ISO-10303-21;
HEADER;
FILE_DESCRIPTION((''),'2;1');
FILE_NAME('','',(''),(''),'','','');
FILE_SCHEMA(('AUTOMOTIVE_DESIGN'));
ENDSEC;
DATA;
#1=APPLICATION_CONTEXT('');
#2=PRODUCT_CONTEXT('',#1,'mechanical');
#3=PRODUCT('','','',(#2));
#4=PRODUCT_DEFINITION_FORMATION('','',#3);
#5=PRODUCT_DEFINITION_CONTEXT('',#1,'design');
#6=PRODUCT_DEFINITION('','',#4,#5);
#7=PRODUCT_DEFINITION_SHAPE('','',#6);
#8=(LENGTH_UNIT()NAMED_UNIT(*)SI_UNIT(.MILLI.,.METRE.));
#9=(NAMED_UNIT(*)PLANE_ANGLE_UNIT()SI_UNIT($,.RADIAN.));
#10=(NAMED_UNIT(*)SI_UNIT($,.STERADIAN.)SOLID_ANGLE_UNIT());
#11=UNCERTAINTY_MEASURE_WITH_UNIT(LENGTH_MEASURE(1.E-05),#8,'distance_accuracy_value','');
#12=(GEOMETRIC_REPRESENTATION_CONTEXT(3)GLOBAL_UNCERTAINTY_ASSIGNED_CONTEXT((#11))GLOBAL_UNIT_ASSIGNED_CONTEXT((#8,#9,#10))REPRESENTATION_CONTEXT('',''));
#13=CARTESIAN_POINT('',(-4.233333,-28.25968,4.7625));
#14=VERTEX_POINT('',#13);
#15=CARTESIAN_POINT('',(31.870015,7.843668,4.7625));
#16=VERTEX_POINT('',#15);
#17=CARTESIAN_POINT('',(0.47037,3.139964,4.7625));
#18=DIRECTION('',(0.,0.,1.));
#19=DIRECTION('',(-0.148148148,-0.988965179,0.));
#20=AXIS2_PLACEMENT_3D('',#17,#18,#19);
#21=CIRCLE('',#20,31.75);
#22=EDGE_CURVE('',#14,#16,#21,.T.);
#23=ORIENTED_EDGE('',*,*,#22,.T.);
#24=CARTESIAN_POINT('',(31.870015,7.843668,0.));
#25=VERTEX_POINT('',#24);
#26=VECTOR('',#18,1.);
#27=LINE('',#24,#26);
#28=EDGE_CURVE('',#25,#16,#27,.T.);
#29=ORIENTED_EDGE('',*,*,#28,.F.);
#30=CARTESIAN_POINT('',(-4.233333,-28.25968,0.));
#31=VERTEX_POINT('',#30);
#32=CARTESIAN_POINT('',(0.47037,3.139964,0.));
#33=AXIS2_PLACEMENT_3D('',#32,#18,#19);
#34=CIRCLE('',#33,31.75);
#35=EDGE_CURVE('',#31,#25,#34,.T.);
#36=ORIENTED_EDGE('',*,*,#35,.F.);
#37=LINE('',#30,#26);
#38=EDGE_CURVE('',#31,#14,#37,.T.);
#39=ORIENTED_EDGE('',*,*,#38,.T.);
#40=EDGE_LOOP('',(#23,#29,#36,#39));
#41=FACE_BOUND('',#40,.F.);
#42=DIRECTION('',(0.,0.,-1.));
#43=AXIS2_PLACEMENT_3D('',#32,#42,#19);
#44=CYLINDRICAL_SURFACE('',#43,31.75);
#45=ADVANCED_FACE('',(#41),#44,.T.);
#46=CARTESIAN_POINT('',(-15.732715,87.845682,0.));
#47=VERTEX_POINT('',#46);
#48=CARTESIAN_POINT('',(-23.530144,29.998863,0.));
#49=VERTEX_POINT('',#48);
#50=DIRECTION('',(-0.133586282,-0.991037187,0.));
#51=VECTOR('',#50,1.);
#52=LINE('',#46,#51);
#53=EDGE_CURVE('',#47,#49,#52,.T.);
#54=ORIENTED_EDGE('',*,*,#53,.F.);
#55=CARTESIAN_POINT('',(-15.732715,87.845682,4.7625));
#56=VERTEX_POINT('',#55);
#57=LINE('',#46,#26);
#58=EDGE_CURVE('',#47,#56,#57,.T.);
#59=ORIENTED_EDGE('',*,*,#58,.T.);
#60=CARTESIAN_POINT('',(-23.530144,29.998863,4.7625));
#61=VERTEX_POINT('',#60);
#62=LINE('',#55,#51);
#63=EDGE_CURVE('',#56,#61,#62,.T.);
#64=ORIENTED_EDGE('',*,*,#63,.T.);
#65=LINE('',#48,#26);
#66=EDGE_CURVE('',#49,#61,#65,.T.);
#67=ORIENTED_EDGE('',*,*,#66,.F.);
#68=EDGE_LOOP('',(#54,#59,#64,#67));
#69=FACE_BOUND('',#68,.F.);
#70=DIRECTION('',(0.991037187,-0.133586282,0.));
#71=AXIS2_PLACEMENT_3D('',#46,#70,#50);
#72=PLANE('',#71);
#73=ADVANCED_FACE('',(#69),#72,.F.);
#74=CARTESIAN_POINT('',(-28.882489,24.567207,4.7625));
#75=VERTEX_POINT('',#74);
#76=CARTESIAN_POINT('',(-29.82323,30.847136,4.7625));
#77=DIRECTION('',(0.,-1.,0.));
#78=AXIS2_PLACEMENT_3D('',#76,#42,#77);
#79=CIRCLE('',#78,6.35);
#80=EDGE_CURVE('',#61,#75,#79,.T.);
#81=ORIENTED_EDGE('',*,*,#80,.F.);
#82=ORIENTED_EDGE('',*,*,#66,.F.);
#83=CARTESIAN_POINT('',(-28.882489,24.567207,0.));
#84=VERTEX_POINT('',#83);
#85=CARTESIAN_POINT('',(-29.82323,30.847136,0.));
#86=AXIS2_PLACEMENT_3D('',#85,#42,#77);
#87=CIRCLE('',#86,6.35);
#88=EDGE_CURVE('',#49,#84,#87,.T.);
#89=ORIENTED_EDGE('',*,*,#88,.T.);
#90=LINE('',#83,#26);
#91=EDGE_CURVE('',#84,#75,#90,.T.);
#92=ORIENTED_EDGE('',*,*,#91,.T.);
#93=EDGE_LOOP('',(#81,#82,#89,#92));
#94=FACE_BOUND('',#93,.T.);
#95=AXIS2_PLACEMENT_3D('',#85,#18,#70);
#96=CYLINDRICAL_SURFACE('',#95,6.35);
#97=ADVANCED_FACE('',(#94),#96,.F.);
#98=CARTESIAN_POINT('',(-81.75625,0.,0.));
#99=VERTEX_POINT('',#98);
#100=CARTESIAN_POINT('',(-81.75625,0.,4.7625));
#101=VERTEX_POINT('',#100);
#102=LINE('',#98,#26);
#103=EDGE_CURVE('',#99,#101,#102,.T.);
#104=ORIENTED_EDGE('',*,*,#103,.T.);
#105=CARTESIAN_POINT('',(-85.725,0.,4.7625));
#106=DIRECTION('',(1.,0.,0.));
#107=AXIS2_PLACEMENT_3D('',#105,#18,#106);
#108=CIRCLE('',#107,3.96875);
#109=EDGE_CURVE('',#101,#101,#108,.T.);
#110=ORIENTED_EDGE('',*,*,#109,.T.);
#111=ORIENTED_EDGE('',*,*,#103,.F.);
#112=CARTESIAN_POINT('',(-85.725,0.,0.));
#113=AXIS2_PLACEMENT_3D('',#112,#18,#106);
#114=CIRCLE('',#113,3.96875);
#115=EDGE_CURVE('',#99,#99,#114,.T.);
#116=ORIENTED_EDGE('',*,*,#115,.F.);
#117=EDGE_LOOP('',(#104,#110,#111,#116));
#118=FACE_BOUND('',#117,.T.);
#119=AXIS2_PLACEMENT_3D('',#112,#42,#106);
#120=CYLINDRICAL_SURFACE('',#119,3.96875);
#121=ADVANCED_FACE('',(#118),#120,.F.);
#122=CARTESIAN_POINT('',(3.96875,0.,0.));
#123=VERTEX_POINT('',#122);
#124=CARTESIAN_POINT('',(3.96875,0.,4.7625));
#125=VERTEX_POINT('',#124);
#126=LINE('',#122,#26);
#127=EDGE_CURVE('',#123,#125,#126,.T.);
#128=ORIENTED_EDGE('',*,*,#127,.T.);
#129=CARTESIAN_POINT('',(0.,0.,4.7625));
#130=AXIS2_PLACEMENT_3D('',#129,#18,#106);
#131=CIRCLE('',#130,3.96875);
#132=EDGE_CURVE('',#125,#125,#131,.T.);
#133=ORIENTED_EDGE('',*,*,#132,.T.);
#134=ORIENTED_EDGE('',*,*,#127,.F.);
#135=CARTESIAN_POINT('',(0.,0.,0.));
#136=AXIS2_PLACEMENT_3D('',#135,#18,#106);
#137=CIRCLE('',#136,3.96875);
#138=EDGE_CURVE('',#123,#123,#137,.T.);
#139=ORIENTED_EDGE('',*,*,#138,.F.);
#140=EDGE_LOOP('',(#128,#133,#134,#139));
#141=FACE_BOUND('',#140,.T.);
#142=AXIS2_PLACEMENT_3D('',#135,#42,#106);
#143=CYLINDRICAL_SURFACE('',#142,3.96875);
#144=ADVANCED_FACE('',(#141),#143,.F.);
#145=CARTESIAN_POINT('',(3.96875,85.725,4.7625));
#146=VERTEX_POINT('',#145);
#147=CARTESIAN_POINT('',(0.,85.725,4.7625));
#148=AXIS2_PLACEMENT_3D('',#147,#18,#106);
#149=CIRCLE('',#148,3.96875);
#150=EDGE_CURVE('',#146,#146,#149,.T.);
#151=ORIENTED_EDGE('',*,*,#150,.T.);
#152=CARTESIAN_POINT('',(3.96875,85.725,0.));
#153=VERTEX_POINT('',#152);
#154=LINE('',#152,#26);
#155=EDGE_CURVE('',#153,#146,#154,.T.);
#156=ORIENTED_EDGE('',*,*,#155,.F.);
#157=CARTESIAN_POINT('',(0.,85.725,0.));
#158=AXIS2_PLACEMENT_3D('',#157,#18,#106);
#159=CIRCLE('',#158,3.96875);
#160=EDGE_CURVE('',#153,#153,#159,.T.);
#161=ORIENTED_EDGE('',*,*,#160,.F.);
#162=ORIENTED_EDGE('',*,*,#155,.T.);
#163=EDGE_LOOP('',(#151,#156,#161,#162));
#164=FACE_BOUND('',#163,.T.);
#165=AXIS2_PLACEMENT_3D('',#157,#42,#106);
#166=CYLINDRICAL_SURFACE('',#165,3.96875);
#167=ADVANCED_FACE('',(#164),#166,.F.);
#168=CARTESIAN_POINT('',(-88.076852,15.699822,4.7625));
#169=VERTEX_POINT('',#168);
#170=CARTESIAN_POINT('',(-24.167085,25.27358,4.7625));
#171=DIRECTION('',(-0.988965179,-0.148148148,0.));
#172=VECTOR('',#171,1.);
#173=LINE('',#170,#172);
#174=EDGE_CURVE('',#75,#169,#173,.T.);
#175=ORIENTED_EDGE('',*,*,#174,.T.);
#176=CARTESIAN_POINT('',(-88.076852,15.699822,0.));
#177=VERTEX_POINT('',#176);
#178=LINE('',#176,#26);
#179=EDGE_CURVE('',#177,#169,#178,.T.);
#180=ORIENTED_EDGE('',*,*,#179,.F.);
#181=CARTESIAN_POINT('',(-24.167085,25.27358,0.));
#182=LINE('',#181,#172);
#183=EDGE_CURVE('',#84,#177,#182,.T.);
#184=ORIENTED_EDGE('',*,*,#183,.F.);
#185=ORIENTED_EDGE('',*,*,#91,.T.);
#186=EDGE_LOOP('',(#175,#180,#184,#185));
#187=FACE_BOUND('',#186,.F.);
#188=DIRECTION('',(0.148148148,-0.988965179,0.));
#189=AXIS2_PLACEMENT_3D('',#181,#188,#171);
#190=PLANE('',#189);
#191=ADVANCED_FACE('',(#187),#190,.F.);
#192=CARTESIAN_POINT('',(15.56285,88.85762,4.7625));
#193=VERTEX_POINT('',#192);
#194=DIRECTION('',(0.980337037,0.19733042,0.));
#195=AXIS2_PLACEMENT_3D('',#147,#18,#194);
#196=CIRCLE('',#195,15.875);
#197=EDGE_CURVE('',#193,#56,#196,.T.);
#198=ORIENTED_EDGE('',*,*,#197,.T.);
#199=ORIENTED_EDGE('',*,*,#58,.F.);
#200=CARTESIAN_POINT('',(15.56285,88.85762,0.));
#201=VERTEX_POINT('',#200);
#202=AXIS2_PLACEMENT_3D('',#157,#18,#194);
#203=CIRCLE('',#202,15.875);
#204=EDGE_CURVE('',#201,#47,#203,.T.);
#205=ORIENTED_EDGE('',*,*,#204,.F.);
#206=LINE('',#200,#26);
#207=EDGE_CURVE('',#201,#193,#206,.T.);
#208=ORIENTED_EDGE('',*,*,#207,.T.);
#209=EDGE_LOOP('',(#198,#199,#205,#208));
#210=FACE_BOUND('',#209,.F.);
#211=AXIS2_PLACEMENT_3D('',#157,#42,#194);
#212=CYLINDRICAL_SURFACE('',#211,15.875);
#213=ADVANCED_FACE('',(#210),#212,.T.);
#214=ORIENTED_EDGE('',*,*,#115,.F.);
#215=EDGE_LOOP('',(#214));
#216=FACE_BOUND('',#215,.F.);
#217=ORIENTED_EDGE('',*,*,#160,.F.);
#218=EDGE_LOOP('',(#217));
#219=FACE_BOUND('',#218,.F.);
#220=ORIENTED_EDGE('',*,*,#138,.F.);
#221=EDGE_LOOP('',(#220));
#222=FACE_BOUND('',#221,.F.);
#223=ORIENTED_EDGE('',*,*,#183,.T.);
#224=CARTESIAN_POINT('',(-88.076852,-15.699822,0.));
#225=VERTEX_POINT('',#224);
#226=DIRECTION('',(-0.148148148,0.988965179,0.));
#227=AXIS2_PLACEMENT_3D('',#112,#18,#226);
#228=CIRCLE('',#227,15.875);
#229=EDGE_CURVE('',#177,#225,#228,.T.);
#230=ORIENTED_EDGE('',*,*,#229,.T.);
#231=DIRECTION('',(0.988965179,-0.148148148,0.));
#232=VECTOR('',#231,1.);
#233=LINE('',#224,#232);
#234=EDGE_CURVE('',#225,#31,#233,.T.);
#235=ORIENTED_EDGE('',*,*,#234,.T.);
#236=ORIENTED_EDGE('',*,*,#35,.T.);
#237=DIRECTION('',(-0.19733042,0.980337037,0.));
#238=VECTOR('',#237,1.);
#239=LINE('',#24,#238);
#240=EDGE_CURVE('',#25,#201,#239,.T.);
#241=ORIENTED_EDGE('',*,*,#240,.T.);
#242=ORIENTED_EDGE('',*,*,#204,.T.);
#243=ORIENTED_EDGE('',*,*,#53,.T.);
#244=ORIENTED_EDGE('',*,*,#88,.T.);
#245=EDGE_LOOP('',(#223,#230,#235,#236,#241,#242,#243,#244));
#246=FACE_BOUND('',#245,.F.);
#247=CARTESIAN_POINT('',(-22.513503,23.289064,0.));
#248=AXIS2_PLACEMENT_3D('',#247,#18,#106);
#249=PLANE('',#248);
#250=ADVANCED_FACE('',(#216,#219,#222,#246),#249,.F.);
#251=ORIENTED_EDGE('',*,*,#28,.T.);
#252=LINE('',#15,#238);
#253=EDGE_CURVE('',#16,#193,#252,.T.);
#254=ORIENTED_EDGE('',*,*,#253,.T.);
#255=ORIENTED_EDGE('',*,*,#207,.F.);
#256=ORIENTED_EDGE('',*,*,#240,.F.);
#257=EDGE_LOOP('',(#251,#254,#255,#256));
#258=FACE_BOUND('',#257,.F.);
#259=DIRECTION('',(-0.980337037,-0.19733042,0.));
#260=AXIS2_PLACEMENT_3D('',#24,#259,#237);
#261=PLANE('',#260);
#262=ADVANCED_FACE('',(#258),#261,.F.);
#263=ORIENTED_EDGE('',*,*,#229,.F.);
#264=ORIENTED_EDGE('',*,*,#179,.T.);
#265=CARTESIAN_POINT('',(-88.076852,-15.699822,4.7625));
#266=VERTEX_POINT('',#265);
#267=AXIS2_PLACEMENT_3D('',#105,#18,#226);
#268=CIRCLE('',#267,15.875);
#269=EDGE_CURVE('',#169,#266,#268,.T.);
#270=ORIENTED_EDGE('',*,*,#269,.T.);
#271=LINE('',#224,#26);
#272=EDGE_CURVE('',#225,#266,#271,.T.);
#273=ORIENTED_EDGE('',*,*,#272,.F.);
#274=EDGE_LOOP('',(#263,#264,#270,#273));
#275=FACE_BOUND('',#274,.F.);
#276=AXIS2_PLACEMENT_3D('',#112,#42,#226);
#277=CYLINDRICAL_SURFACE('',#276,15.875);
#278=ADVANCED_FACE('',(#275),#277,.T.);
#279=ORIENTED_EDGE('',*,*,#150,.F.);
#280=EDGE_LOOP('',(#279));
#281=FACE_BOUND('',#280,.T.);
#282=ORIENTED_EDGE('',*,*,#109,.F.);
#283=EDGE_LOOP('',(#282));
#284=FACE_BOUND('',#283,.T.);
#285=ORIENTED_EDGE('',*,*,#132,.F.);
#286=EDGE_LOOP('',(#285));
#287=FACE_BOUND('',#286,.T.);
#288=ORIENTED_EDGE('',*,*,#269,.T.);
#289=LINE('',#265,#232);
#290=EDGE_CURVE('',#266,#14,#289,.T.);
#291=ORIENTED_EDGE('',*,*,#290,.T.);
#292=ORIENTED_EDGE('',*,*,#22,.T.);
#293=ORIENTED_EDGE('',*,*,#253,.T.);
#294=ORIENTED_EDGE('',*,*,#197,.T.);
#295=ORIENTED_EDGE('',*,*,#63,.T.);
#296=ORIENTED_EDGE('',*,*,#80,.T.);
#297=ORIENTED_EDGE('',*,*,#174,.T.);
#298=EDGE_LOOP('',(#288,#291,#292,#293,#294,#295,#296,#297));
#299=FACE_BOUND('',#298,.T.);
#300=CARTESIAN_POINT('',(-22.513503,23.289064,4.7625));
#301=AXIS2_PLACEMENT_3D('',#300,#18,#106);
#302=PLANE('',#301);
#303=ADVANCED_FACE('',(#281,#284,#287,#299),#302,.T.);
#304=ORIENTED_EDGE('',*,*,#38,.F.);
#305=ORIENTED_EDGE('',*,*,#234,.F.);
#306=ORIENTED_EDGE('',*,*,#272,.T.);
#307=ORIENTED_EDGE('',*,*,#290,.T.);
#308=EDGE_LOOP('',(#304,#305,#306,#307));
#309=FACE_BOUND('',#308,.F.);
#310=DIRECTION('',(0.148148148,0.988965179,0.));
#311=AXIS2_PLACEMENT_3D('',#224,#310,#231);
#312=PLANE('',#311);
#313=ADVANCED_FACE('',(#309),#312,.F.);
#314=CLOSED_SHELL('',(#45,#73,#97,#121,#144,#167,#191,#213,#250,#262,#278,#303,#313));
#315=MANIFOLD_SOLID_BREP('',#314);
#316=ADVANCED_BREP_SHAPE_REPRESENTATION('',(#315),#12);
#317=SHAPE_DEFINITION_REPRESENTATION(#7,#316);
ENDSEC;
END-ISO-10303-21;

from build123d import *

# Parameters (mm, degrees)
F0_R     = 3.96875
F1_DEPTH = 4.7625
F2_R     = 6.35


# Not quite as in the source:
# - a feature names something its author has since deleted; it is built from what else it names


with BuildPart() as f1:
    # F0 (on Top) → F1 (new body)
    with BuildSketch(Plane.XY):
        with BuildLine():
            Line((31.8700148185, 7.8436681485), (15.5628504577, 88.8576204098))
            ThreePointArc((15.5628504577, 88.8576204098), (-0.5130479886, 101.5917074959), (-15.732715337, 87.8456822313))
            Line((-15.732715337, 87.8456822313), (-24.1670854724, 25.2735804658))
            Line((-24.1670854724, 25.2735804658), (-88.0768518519, 15.6998222241))
            ThreePointArc((-88.0768518519, 15.6998222241), (-101.6, 0), (-88.0768518519, -15.6998222241))
            Line((-88.0768518519, -15.6998222241), (-4.2333333333, -28.2596800033))
            ThreePointArc((-4.2333333333, -28.2596800033), (22.921010673, -19.3106758579), (31.8700148185, 7.8436681485))
        make_face()
        with Locations((-85.725, 0)):
            Circle(F0_R, mode=Mode.SUBTRACT)
        Circle(F0_R, mode=Mode.SUBTRACT)
        with Locations((0, 85.725)):
            Circle(F0_R, mode=Mode.SUBTRACT)
    extrude(amount=F1_DEPTH)

    # F2
    f2_edges = [f1.edges().sort_by_distance(p)[0] for p in [
        (-24.167085, 25.27358, 2.38125),
    ]]
    fillet(f2_edges, radius=F2_R)


solid = f1.part
